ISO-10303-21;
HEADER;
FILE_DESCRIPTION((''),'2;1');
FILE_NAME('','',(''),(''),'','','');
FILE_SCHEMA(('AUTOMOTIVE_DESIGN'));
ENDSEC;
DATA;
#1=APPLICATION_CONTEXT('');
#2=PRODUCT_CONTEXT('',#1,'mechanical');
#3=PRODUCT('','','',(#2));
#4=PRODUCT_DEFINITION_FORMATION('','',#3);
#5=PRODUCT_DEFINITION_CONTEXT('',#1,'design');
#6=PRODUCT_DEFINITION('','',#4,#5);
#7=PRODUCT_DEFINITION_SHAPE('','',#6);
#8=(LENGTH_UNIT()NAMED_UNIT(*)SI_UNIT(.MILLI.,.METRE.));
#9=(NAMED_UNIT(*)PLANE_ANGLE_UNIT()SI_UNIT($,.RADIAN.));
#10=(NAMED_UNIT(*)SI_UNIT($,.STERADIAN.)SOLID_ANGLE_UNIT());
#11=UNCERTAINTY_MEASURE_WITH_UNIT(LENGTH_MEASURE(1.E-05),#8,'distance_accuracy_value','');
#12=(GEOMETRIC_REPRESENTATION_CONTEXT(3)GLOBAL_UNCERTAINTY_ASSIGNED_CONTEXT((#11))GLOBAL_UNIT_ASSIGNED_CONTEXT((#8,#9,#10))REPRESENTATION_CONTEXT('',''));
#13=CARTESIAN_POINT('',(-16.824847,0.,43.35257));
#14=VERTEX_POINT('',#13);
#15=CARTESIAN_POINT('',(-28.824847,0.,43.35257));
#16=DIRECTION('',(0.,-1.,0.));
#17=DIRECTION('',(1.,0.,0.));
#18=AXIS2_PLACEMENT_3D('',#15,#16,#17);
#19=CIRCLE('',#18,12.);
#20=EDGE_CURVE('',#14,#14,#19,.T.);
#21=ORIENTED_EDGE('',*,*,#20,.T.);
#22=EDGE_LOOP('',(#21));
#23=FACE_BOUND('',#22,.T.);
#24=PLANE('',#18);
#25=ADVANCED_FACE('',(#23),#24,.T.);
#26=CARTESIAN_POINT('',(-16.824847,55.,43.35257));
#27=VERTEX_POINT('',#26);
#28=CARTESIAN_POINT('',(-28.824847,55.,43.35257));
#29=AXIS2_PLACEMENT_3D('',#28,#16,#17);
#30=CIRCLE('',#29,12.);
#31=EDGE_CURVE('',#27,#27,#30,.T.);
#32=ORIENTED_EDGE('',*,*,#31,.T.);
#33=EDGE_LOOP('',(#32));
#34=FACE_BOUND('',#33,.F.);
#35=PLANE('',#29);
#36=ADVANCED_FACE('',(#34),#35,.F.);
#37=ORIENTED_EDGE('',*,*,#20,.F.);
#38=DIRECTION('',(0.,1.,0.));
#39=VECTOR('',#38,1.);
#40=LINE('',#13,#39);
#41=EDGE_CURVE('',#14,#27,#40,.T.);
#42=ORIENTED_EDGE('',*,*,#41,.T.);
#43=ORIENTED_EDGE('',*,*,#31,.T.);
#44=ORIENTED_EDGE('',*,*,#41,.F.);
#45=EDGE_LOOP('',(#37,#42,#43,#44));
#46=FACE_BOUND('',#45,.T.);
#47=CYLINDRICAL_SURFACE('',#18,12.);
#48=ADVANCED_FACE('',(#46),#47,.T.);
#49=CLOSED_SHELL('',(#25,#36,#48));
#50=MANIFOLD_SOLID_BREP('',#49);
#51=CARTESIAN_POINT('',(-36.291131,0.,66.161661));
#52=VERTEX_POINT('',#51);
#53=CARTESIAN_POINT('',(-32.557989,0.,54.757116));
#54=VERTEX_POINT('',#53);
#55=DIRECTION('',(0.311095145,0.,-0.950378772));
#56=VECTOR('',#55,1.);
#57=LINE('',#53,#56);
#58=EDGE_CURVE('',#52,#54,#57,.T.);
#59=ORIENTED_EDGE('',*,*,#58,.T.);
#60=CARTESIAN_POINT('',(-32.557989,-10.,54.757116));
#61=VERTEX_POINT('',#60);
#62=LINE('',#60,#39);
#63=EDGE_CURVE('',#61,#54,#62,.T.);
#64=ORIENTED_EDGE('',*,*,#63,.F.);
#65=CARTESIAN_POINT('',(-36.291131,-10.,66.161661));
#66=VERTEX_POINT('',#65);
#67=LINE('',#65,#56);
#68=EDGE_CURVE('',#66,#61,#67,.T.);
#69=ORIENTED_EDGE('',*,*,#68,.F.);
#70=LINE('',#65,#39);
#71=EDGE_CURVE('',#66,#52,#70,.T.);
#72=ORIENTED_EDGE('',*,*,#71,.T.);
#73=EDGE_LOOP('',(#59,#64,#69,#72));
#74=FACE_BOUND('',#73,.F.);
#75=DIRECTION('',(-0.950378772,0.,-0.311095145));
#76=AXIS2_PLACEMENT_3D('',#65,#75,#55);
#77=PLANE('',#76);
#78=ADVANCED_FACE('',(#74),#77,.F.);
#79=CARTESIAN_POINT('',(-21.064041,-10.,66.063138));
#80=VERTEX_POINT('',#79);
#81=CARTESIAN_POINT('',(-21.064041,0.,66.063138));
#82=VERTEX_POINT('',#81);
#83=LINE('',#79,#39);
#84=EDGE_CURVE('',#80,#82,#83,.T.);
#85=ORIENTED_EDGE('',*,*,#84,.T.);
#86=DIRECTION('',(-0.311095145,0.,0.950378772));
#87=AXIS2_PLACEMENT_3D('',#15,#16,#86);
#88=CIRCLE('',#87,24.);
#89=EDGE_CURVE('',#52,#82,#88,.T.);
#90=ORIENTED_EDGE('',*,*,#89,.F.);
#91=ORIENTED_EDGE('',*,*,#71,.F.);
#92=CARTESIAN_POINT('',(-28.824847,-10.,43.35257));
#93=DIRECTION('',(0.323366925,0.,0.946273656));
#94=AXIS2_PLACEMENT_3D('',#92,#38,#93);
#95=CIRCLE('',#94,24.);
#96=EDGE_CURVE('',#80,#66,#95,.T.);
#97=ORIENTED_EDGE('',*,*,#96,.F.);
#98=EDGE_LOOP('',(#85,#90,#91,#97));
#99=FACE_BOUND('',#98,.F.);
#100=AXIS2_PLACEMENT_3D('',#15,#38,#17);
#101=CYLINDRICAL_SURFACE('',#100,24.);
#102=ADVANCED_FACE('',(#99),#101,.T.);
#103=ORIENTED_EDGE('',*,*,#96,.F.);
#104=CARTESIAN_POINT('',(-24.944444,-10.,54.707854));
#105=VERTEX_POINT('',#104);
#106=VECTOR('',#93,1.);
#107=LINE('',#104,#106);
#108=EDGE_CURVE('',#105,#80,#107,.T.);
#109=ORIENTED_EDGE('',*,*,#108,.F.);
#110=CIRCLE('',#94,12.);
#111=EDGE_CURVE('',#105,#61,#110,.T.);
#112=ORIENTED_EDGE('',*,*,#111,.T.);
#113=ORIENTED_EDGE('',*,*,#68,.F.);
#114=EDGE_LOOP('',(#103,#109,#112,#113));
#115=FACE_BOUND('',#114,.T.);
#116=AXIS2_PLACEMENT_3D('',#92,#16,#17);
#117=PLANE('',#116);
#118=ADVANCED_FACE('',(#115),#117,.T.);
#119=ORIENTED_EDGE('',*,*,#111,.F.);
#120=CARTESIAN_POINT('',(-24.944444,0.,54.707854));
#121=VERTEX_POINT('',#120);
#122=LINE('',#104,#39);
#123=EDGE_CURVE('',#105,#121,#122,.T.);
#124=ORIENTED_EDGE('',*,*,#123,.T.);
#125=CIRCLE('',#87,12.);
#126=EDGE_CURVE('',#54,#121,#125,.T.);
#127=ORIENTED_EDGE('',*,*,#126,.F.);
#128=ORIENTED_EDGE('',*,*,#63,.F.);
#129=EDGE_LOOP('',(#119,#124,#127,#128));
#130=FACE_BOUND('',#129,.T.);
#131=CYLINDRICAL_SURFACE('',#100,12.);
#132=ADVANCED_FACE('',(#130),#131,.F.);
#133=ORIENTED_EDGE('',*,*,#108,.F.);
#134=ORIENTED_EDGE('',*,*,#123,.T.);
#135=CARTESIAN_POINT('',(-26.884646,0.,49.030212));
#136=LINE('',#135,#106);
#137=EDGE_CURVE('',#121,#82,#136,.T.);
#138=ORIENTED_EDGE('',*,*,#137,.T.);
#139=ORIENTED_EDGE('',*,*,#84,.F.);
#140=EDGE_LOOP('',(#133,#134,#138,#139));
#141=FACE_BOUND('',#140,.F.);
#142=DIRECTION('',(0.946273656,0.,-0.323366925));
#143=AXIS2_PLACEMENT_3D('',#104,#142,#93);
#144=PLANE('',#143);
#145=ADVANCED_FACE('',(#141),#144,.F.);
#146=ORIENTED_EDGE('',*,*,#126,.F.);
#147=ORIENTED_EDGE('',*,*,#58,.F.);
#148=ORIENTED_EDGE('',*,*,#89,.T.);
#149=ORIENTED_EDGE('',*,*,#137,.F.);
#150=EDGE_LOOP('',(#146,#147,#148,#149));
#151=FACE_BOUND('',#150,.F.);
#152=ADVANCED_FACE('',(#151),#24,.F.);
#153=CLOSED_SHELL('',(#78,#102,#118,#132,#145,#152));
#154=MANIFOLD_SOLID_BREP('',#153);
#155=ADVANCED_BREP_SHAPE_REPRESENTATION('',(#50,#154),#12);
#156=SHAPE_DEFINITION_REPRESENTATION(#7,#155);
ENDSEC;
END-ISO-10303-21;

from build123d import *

# Parameters (mm, degrees)
F0_R     = 12
F1_DEPTH = 55
F2_R     = 24
F2_R_2   = 12
F3_DEPTH = 10
F5_DEPTH = 25


with BuildPart() as f1:
    # F0 (on Front) → F1 (new body)
    with BuildSketch(Plane.XZ):
        with Locations((-28.8248471916, 43.3525703847)):
            Circle(F0_R)
    extrude(amount=-F1_DEPTH)


with BuildPart() as f3:
    # F2 (on face) → F3 (new body)
    with BuildSketch(Plane.XZ):
        with Locations((-28.8248471916, 43.3525703847)):
            Circle(F2_R)
        with Locations((-28.8248471916, 43.3525703847)):
            Circle(F2_R_2, mode=Mode.SUBTRACT)
    extrude(amount=F3_DEPTH)

    # F4 (on face) → F5 (cut)
    with BuildSketch(Plane.XZ.offset(10)):
        with BuildLine():
            Line((-36.2911306636, 66.1616609215), (-32.5579889276, 54.7571156531))
            ThreePointArc((-32.5579889276, 54.7571156531), (-28.7472060364, 55.3523192092), (-24.9444440878, 54.707854254))
            Line((-24.9444440878, 54.707854254), (-21.0640409839, 66.0631381233))
            ThreePointArc((-21.0640409839, 66.0631381233), (-28.6695648813, 67.3520680337), (-36.2911306636, 66.1616609215))
        make_face()
    extrude(amount=-F5_DEPTH, mode=Mode.SUBTRACT)


solid = Compound([f1.part, f3.part])
